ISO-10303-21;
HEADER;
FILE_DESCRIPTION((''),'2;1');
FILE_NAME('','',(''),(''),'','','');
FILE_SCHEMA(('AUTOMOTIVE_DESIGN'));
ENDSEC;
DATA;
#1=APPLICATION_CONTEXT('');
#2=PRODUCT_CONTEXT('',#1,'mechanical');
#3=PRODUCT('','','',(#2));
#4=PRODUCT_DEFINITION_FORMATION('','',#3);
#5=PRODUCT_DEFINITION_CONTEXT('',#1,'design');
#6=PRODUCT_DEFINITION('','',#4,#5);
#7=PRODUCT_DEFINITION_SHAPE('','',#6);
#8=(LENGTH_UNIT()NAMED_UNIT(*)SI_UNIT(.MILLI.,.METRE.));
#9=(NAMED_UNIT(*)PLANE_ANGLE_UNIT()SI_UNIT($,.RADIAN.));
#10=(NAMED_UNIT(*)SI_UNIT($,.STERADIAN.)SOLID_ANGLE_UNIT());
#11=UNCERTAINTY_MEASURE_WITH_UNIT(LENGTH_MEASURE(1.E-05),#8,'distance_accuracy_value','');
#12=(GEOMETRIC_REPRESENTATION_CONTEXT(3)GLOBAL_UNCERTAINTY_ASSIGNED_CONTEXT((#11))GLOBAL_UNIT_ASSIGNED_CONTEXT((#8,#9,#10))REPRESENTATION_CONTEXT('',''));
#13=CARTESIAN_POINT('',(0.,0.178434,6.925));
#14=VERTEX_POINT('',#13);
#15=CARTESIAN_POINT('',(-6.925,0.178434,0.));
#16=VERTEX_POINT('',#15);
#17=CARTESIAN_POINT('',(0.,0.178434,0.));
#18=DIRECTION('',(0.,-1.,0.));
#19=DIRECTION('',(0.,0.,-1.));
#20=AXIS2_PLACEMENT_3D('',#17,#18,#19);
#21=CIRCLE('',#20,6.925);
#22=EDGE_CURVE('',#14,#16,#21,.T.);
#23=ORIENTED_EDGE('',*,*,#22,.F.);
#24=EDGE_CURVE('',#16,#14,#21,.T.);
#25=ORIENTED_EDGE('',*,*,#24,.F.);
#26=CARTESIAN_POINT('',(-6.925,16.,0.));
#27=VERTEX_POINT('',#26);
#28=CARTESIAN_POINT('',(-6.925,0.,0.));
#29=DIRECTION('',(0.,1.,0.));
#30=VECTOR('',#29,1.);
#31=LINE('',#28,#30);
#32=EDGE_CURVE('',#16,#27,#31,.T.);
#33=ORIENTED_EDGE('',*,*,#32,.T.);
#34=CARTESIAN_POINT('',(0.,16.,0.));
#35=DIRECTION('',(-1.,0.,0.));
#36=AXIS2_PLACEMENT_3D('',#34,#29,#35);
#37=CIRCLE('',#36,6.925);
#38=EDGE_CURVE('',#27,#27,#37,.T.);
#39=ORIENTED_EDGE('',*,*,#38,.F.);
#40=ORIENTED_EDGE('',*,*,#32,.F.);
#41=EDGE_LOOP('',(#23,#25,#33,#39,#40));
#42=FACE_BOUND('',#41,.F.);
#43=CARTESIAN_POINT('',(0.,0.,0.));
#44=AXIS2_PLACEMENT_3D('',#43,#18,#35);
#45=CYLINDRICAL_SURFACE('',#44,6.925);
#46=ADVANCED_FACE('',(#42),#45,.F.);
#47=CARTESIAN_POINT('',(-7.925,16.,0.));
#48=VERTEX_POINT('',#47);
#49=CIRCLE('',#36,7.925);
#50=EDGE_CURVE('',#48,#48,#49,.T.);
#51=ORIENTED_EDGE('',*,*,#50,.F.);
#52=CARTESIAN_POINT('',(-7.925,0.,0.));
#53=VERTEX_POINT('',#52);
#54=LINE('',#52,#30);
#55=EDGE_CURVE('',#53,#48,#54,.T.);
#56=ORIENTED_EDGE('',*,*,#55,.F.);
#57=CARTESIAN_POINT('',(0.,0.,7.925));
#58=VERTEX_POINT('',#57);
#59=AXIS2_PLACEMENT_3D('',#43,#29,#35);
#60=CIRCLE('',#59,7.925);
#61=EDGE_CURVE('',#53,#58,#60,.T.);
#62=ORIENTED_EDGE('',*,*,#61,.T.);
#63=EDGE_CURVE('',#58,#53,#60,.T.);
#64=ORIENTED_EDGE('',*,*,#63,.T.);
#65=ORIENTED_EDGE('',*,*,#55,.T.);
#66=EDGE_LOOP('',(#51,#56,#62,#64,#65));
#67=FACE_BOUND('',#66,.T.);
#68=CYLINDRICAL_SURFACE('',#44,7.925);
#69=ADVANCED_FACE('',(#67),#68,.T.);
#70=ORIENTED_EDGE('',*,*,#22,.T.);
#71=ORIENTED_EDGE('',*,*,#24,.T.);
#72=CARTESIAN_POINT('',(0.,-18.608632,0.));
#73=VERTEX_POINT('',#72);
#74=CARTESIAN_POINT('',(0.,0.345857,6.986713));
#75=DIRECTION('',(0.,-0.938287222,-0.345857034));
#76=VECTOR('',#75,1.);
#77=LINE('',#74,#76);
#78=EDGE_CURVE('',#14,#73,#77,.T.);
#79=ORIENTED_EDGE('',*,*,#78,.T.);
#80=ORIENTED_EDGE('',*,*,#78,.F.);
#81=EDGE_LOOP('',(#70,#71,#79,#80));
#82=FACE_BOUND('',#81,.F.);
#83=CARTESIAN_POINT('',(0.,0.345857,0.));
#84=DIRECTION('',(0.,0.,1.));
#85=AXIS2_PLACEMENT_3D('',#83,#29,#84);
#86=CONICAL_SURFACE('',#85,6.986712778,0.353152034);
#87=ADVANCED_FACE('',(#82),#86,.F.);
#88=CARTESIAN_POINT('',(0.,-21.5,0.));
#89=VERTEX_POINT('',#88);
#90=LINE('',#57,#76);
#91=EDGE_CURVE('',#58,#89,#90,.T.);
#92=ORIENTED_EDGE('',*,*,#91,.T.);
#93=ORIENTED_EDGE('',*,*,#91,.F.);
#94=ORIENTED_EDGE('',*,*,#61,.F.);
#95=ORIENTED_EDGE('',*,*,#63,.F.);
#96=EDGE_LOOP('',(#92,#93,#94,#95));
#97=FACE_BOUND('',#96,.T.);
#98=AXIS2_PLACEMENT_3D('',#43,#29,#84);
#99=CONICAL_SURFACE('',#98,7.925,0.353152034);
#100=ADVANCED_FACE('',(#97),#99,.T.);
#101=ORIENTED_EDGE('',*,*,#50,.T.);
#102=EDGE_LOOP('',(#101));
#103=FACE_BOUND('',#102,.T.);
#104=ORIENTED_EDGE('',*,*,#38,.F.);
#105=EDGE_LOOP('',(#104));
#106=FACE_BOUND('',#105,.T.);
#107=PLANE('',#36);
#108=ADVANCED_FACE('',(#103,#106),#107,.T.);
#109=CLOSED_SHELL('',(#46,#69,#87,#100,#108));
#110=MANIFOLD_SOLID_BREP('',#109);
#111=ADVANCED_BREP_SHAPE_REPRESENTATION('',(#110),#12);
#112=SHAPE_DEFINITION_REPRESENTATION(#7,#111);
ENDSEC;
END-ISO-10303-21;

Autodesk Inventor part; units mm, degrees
ref_plane "YZ Plane" through (0, 0, 0) normal (1, 0, 0) x (0, 1, 0)
ref_plane "XZ Plane" through (0, 0, 0) normal (0, 1, 0) x (-1, 0, 0)
ref_plane "XY Plane" through (0, 0, 0) normal (0, 0, 1) x (1, 0, 0)
sketch "Sketch1" plane through (0, 0, 0) normal (0, 1, 0) x (-1, 0, 0)
  circle A0 centre (0, 0) radius 7.925
  dimension "d5" = 15.85
extrude "Extrusion1" add sketch "Sketch1" along normal blind 16
sketch "Sketch2" plane through (0, 0, 0) normal (1, 0, 0) x (0, 1, 0)
  line L0 (16, -7.925) -> (16, 7.925) projected
  line L1 (0, 7.925) -> (0, -7.925) projected
  line L2 (0, 7.925) -> (0, -7.925) projected
  line L3 (0, 7.925) -> (-21.5, 0)
  line L4 (-21.5, 0) -> (0, 0)
  line L5 (0, 7.925) -> (0, 0)
  dimension "d2" = 21.5
revolve "Revolution1" add sketch "Sketch2" angle 360 about axis through (0, -21.5, 0) along (0, 1, 0)
shell "Shell1" thickness 1 removed faces 1 at (2.2031, 16, 0.1081)
properties part number "FalconTube15mL"
